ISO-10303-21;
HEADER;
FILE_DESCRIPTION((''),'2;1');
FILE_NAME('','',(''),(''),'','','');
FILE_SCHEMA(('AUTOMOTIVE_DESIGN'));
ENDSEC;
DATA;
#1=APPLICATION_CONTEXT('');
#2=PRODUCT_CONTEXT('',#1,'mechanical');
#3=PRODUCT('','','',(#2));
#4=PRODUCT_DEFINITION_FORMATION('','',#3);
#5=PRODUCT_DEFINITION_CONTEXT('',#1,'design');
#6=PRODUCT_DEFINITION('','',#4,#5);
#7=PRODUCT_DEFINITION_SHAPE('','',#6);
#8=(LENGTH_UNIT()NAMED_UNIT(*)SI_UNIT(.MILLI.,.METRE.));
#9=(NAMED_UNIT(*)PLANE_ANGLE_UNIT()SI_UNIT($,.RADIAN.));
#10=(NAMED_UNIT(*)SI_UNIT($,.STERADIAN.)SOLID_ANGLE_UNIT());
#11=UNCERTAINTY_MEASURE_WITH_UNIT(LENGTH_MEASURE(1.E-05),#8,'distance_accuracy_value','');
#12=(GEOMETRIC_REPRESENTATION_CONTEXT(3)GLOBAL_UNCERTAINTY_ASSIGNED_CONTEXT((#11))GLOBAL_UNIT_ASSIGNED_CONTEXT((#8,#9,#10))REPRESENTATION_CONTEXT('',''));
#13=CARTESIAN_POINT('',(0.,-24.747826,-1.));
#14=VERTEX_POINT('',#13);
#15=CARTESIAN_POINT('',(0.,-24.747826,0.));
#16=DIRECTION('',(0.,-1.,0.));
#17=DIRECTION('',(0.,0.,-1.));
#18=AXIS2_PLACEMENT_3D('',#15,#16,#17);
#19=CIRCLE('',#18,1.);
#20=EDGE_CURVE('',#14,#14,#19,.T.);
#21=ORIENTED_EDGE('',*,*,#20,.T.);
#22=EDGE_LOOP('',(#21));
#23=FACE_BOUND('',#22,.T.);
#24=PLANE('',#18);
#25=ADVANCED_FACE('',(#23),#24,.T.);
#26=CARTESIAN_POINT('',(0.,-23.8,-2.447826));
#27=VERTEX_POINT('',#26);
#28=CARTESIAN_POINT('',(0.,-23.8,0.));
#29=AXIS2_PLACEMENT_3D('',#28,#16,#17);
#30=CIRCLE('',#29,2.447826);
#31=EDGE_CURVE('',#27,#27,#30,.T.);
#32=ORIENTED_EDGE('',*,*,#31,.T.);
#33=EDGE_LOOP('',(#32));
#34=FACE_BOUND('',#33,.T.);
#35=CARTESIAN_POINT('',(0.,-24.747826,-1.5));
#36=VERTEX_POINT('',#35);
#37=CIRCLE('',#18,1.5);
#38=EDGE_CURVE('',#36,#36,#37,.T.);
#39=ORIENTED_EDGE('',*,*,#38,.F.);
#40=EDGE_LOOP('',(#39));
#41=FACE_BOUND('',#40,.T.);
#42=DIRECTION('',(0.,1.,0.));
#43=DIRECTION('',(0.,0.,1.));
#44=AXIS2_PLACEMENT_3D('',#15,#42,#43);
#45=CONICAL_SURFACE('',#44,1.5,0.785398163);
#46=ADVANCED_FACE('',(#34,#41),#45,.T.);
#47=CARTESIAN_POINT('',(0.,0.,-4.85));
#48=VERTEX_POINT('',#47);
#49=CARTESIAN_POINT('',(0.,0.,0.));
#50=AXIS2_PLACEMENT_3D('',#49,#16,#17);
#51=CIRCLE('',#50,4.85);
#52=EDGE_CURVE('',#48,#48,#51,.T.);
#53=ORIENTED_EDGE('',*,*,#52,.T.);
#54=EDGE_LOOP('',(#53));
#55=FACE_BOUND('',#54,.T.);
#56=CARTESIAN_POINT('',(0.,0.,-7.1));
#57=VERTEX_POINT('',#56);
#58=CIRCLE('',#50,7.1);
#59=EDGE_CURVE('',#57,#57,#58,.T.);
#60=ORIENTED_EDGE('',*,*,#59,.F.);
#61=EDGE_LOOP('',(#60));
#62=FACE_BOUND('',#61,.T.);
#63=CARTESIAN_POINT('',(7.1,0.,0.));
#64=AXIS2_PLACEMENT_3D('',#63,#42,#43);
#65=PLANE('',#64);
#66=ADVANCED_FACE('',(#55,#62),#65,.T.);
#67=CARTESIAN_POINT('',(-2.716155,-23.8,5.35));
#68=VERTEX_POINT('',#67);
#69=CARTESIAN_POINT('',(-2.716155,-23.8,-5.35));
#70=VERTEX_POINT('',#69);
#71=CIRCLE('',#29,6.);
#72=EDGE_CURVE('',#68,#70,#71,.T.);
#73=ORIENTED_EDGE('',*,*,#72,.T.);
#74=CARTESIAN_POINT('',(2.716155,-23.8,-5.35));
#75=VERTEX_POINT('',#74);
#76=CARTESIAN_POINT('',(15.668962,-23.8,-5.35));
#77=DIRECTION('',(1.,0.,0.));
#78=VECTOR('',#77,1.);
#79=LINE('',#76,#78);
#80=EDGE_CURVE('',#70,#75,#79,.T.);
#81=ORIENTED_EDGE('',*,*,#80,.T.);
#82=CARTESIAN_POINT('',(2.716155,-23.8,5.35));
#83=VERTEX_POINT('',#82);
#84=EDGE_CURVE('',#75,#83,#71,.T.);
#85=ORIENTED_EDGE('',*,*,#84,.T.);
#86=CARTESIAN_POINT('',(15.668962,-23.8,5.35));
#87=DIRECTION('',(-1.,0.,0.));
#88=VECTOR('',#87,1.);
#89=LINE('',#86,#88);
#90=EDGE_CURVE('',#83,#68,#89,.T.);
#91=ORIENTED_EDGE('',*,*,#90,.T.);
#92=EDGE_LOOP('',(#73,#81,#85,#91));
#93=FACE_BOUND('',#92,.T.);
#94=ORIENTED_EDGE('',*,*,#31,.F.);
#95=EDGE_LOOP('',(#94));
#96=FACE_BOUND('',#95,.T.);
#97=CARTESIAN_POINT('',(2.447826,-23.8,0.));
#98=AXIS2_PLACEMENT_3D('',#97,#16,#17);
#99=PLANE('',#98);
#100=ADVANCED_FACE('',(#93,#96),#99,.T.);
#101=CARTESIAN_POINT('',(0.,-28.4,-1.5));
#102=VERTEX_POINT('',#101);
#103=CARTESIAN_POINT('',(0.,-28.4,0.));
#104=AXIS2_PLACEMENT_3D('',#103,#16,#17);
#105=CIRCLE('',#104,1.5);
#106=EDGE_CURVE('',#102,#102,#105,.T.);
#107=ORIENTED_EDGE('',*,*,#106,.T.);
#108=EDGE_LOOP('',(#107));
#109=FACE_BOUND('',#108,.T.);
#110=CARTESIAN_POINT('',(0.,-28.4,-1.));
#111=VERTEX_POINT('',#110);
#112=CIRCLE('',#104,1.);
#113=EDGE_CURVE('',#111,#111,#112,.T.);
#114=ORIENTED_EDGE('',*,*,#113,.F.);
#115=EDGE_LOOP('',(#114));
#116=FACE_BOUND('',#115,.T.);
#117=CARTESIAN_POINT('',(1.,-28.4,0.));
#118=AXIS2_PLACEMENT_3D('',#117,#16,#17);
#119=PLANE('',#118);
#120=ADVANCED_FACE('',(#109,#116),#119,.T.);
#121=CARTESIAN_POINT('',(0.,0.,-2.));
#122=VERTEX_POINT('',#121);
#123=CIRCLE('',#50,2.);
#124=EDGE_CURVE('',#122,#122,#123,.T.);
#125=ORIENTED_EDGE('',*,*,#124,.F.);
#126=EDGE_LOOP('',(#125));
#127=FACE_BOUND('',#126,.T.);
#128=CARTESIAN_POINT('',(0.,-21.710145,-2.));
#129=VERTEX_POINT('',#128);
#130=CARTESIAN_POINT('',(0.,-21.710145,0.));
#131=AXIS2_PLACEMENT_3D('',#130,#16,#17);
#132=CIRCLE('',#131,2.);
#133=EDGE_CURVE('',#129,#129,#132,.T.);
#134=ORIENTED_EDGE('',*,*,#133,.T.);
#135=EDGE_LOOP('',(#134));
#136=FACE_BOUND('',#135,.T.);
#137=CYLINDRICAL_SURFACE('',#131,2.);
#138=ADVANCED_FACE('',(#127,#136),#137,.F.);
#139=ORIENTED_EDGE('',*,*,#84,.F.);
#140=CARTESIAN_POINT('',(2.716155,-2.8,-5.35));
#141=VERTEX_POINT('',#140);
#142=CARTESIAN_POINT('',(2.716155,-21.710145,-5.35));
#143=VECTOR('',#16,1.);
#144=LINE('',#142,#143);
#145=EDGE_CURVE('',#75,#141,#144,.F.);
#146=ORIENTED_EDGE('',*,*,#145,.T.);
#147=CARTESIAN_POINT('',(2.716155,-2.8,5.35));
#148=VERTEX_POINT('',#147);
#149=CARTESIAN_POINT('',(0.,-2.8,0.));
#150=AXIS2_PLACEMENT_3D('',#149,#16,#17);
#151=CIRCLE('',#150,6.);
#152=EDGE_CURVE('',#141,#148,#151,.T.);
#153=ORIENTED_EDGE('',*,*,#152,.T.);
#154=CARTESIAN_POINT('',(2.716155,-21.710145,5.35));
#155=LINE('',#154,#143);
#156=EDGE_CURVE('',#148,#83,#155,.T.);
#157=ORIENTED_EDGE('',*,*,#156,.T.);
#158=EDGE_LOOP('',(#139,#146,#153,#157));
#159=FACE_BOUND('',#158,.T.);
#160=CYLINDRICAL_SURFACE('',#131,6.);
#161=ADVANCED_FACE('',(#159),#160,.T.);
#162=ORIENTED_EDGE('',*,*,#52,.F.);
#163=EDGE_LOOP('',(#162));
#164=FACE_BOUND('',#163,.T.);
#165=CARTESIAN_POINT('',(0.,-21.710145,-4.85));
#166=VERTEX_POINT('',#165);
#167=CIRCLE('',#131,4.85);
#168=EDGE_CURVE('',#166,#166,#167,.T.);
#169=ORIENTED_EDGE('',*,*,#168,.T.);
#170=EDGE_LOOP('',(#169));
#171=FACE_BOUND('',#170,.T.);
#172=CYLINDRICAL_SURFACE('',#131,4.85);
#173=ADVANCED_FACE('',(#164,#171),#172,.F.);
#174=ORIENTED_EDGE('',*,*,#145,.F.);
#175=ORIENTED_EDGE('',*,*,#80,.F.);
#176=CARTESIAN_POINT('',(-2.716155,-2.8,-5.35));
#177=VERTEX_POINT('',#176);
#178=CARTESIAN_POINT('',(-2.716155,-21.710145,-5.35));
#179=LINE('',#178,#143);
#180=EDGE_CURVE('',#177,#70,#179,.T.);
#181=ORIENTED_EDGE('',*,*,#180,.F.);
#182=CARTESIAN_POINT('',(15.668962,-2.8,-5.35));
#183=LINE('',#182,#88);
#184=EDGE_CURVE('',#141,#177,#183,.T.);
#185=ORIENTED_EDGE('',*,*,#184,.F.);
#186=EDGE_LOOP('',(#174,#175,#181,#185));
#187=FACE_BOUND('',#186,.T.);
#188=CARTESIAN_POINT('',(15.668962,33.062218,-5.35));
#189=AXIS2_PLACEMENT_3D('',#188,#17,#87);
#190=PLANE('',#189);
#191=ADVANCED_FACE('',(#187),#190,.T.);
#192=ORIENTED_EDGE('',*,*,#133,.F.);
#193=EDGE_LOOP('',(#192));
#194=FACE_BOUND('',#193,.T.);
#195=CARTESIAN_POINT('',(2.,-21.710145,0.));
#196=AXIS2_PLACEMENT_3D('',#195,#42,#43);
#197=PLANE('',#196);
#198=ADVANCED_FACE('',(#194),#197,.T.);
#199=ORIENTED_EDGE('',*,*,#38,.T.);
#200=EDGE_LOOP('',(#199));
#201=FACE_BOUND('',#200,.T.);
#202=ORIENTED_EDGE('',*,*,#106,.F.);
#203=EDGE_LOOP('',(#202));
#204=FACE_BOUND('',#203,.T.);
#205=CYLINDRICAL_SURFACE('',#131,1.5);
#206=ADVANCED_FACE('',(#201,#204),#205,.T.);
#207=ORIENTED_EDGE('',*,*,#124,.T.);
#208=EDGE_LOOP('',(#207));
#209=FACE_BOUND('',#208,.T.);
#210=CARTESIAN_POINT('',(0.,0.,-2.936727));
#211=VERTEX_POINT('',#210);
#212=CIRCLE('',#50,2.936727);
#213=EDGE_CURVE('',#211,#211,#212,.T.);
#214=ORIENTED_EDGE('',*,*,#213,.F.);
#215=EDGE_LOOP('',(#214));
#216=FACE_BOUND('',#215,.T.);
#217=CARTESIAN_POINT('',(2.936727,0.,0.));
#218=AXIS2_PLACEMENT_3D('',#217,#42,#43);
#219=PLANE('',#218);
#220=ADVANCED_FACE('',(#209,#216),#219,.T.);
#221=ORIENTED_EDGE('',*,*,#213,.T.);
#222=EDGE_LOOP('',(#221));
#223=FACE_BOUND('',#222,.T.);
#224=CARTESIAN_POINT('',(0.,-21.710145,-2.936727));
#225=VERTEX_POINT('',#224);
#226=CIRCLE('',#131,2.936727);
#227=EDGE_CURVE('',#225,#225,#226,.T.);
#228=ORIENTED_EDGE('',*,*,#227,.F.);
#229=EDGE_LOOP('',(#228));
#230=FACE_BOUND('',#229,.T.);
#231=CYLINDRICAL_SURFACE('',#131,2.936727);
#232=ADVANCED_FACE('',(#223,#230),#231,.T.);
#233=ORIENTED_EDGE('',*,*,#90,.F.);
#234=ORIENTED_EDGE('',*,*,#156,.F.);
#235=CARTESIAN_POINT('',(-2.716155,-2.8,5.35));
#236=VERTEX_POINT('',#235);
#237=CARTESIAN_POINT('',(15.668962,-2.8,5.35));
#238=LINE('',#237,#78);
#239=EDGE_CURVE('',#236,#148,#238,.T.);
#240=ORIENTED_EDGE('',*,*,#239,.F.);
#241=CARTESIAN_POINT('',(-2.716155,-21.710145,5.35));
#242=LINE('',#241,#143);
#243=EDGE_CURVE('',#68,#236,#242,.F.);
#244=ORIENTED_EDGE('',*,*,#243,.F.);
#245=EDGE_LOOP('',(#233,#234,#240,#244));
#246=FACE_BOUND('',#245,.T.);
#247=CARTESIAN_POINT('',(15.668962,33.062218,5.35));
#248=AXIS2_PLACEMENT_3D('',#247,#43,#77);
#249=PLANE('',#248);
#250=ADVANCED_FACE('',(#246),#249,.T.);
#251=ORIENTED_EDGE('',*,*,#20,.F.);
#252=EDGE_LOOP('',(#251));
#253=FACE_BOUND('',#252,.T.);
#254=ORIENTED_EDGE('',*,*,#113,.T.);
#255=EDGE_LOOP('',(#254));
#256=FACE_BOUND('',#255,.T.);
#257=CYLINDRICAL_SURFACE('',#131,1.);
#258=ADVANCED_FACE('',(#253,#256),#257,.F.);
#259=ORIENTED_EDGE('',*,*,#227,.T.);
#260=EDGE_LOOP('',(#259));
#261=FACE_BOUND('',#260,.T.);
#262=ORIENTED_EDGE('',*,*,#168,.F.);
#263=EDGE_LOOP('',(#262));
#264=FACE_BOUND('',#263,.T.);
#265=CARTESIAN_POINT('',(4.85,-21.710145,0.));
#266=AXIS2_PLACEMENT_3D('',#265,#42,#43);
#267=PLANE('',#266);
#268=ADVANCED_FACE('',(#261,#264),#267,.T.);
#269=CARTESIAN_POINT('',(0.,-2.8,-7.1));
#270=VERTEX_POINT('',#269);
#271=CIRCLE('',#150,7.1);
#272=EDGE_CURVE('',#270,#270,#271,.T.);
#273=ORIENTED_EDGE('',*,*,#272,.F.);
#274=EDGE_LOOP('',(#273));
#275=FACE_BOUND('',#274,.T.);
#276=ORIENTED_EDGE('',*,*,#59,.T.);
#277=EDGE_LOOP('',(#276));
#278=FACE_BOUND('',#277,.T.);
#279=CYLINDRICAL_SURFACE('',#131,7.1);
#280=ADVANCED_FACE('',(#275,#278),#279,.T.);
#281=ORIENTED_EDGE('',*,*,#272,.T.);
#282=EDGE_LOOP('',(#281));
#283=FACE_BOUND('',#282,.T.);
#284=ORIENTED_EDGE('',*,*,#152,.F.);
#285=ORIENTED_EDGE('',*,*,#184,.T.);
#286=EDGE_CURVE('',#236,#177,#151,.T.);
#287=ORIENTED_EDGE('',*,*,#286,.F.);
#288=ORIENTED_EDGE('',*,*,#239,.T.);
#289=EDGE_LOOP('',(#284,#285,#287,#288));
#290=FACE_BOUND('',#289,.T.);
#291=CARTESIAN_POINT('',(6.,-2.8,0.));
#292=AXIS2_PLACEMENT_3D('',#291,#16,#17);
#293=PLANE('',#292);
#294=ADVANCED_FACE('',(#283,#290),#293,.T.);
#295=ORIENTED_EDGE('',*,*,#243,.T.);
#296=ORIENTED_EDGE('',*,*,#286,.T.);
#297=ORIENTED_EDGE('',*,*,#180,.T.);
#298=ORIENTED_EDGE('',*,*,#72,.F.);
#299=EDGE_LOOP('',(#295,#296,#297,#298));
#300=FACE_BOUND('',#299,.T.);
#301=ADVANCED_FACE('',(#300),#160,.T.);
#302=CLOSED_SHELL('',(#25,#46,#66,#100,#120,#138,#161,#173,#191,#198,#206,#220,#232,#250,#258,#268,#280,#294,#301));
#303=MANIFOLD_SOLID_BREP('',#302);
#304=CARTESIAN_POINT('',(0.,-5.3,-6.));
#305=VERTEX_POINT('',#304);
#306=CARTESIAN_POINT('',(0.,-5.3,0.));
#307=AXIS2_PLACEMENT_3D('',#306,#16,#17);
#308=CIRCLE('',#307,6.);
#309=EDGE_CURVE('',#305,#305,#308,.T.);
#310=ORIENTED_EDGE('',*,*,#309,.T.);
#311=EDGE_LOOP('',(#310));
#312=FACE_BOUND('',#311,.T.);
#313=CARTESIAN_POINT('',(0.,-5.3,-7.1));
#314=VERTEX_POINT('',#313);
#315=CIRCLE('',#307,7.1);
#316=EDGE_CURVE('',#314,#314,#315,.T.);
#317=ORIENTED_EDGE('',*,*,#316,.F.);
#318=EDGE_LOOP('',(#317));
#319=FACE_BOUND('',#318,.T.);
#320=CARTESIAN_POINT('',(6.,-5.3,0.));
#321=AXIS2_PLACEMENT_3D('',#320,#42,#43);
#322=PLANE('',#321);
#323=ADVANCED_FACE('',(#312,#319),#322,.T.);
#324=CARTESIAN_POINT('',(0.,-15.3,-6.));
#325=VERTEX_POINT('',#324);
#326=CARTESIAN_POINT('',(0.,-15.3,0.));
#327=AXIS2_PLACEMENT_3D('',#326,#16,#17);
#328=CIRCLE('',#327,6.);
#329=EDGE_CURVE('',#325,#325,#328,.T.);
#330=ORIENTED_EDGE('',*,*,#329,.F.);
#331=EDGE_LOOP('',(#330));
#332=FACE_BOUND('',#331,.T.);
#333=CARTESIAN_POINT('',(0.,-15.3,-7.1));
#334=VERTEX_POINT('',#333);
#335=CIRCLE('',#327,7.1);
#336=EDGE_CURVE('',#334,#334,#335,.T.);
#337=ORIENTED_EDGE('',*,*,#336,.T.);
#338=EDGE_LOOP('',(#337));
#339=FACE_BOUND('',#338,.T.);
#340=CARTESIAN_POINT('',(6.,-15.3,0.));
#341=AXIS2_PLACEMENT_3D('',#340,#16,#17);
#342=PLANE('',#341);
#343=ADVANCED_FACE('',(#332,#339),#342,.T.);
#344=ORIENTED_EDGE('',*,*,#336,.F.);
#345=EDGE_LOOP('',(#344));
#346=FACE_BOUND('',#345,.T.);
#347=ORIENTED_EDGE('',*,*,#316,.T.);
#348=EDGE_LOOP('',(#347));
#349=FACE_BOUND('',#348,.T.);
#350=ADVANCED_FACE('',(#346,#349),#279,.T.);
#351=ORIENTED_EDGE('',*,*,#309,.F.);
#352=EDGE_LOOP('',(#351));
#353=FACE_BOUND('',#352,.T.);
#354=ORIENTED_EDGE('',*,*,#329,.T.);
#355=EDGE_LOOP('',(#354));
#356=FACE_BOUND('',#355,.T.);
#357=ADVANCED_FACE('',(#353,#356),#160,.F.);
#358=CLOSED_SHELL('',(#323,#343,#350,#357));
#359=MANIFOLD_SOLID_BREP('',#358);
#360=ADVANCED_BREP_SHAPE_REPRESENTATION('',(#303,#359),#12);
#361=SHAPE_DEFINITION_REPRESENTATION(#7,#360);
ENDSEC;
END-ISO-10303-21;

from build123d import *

# Parameters (mm, degrees)
CUT_EXTRUDE1_START = -21
CUT_EXTRUDE1_DEPTH = 21
SKETCH3_W          = 1.1
SKETCH3_H          = 10


# Read off the part's stored shape, not the designer's step: Cut-Extrude1
with BuildPart() as part:
    # Sketch1 → Revolve1 (revolve)
    with BuildSketch(Plane.XY, mode=Mode.PRIVATE) as revolve1_sk:
        Polygon((7.1, 0), (4.85, 0), (4.85, -21.710144928), (2.936727406, -21.710144928), (2.936727406, 0), (2, 0), (2, -21.710144928), (0, -21.710144928), (0, -24.747826087), (1, -24.747826087), (1, -28.4), (1.5, -28.4), (1.5, -24.747826087), (2.447826087, -23.8), (6, -23.8), (6, -2.8), (7.1, -2.8), align=None)
    revolve(revolve1_sk.sketch.rotate(Axis((0, -21.710144928, 0), (0, 1, 0)), 90), axis=Axis((0, -21.710144928, 0), (0, 1, 0)))

    # Cut-Extrude1 outline → Cut-Extrude1 (cut)
    with BuildSketch(Plane.XZ.offset(23.8).offset(CUT_EXTRUDE1_START)):
        with BuildLine():
            Line((2.716155371, -5.35), (-2.716155371, -5.35))
            ThreePointArc((-2.716155371, -5.35), (0, -6), (2.716155371, -5.35))
        make_face()
        with BuildLine():
            ThreePointArc((2.716155371, 5.35), (0, 6), (-2.716155371, 5.35))
            Line((-2.716155371, 5.35), (2.716155371, 5.35))
        make_face()
    extrude(amount=CUT_EXTRUDE1_DEPTH, mode=Mode.SUBTRACT)


with BuildPart() as body_2:
    # Sketch3 → Revolve2 (revolve)
    with BuildSketch(Plane.XY, mode=Mode.PRIVATE) as revolve2_sk:
        with Locations((6.55, -10.3)):
            Rectangle(SKETCH3_W, SKETCH3_H)
    revolve(revolve2_sk.sketch.rotate(Axis((0, -21.710144928, 0), (0, 1, 0)), 90), axis=Axis((0, -21.710144928, 0), (0, 1, 0)))


solid = Compound([part.part, body_2.part])
